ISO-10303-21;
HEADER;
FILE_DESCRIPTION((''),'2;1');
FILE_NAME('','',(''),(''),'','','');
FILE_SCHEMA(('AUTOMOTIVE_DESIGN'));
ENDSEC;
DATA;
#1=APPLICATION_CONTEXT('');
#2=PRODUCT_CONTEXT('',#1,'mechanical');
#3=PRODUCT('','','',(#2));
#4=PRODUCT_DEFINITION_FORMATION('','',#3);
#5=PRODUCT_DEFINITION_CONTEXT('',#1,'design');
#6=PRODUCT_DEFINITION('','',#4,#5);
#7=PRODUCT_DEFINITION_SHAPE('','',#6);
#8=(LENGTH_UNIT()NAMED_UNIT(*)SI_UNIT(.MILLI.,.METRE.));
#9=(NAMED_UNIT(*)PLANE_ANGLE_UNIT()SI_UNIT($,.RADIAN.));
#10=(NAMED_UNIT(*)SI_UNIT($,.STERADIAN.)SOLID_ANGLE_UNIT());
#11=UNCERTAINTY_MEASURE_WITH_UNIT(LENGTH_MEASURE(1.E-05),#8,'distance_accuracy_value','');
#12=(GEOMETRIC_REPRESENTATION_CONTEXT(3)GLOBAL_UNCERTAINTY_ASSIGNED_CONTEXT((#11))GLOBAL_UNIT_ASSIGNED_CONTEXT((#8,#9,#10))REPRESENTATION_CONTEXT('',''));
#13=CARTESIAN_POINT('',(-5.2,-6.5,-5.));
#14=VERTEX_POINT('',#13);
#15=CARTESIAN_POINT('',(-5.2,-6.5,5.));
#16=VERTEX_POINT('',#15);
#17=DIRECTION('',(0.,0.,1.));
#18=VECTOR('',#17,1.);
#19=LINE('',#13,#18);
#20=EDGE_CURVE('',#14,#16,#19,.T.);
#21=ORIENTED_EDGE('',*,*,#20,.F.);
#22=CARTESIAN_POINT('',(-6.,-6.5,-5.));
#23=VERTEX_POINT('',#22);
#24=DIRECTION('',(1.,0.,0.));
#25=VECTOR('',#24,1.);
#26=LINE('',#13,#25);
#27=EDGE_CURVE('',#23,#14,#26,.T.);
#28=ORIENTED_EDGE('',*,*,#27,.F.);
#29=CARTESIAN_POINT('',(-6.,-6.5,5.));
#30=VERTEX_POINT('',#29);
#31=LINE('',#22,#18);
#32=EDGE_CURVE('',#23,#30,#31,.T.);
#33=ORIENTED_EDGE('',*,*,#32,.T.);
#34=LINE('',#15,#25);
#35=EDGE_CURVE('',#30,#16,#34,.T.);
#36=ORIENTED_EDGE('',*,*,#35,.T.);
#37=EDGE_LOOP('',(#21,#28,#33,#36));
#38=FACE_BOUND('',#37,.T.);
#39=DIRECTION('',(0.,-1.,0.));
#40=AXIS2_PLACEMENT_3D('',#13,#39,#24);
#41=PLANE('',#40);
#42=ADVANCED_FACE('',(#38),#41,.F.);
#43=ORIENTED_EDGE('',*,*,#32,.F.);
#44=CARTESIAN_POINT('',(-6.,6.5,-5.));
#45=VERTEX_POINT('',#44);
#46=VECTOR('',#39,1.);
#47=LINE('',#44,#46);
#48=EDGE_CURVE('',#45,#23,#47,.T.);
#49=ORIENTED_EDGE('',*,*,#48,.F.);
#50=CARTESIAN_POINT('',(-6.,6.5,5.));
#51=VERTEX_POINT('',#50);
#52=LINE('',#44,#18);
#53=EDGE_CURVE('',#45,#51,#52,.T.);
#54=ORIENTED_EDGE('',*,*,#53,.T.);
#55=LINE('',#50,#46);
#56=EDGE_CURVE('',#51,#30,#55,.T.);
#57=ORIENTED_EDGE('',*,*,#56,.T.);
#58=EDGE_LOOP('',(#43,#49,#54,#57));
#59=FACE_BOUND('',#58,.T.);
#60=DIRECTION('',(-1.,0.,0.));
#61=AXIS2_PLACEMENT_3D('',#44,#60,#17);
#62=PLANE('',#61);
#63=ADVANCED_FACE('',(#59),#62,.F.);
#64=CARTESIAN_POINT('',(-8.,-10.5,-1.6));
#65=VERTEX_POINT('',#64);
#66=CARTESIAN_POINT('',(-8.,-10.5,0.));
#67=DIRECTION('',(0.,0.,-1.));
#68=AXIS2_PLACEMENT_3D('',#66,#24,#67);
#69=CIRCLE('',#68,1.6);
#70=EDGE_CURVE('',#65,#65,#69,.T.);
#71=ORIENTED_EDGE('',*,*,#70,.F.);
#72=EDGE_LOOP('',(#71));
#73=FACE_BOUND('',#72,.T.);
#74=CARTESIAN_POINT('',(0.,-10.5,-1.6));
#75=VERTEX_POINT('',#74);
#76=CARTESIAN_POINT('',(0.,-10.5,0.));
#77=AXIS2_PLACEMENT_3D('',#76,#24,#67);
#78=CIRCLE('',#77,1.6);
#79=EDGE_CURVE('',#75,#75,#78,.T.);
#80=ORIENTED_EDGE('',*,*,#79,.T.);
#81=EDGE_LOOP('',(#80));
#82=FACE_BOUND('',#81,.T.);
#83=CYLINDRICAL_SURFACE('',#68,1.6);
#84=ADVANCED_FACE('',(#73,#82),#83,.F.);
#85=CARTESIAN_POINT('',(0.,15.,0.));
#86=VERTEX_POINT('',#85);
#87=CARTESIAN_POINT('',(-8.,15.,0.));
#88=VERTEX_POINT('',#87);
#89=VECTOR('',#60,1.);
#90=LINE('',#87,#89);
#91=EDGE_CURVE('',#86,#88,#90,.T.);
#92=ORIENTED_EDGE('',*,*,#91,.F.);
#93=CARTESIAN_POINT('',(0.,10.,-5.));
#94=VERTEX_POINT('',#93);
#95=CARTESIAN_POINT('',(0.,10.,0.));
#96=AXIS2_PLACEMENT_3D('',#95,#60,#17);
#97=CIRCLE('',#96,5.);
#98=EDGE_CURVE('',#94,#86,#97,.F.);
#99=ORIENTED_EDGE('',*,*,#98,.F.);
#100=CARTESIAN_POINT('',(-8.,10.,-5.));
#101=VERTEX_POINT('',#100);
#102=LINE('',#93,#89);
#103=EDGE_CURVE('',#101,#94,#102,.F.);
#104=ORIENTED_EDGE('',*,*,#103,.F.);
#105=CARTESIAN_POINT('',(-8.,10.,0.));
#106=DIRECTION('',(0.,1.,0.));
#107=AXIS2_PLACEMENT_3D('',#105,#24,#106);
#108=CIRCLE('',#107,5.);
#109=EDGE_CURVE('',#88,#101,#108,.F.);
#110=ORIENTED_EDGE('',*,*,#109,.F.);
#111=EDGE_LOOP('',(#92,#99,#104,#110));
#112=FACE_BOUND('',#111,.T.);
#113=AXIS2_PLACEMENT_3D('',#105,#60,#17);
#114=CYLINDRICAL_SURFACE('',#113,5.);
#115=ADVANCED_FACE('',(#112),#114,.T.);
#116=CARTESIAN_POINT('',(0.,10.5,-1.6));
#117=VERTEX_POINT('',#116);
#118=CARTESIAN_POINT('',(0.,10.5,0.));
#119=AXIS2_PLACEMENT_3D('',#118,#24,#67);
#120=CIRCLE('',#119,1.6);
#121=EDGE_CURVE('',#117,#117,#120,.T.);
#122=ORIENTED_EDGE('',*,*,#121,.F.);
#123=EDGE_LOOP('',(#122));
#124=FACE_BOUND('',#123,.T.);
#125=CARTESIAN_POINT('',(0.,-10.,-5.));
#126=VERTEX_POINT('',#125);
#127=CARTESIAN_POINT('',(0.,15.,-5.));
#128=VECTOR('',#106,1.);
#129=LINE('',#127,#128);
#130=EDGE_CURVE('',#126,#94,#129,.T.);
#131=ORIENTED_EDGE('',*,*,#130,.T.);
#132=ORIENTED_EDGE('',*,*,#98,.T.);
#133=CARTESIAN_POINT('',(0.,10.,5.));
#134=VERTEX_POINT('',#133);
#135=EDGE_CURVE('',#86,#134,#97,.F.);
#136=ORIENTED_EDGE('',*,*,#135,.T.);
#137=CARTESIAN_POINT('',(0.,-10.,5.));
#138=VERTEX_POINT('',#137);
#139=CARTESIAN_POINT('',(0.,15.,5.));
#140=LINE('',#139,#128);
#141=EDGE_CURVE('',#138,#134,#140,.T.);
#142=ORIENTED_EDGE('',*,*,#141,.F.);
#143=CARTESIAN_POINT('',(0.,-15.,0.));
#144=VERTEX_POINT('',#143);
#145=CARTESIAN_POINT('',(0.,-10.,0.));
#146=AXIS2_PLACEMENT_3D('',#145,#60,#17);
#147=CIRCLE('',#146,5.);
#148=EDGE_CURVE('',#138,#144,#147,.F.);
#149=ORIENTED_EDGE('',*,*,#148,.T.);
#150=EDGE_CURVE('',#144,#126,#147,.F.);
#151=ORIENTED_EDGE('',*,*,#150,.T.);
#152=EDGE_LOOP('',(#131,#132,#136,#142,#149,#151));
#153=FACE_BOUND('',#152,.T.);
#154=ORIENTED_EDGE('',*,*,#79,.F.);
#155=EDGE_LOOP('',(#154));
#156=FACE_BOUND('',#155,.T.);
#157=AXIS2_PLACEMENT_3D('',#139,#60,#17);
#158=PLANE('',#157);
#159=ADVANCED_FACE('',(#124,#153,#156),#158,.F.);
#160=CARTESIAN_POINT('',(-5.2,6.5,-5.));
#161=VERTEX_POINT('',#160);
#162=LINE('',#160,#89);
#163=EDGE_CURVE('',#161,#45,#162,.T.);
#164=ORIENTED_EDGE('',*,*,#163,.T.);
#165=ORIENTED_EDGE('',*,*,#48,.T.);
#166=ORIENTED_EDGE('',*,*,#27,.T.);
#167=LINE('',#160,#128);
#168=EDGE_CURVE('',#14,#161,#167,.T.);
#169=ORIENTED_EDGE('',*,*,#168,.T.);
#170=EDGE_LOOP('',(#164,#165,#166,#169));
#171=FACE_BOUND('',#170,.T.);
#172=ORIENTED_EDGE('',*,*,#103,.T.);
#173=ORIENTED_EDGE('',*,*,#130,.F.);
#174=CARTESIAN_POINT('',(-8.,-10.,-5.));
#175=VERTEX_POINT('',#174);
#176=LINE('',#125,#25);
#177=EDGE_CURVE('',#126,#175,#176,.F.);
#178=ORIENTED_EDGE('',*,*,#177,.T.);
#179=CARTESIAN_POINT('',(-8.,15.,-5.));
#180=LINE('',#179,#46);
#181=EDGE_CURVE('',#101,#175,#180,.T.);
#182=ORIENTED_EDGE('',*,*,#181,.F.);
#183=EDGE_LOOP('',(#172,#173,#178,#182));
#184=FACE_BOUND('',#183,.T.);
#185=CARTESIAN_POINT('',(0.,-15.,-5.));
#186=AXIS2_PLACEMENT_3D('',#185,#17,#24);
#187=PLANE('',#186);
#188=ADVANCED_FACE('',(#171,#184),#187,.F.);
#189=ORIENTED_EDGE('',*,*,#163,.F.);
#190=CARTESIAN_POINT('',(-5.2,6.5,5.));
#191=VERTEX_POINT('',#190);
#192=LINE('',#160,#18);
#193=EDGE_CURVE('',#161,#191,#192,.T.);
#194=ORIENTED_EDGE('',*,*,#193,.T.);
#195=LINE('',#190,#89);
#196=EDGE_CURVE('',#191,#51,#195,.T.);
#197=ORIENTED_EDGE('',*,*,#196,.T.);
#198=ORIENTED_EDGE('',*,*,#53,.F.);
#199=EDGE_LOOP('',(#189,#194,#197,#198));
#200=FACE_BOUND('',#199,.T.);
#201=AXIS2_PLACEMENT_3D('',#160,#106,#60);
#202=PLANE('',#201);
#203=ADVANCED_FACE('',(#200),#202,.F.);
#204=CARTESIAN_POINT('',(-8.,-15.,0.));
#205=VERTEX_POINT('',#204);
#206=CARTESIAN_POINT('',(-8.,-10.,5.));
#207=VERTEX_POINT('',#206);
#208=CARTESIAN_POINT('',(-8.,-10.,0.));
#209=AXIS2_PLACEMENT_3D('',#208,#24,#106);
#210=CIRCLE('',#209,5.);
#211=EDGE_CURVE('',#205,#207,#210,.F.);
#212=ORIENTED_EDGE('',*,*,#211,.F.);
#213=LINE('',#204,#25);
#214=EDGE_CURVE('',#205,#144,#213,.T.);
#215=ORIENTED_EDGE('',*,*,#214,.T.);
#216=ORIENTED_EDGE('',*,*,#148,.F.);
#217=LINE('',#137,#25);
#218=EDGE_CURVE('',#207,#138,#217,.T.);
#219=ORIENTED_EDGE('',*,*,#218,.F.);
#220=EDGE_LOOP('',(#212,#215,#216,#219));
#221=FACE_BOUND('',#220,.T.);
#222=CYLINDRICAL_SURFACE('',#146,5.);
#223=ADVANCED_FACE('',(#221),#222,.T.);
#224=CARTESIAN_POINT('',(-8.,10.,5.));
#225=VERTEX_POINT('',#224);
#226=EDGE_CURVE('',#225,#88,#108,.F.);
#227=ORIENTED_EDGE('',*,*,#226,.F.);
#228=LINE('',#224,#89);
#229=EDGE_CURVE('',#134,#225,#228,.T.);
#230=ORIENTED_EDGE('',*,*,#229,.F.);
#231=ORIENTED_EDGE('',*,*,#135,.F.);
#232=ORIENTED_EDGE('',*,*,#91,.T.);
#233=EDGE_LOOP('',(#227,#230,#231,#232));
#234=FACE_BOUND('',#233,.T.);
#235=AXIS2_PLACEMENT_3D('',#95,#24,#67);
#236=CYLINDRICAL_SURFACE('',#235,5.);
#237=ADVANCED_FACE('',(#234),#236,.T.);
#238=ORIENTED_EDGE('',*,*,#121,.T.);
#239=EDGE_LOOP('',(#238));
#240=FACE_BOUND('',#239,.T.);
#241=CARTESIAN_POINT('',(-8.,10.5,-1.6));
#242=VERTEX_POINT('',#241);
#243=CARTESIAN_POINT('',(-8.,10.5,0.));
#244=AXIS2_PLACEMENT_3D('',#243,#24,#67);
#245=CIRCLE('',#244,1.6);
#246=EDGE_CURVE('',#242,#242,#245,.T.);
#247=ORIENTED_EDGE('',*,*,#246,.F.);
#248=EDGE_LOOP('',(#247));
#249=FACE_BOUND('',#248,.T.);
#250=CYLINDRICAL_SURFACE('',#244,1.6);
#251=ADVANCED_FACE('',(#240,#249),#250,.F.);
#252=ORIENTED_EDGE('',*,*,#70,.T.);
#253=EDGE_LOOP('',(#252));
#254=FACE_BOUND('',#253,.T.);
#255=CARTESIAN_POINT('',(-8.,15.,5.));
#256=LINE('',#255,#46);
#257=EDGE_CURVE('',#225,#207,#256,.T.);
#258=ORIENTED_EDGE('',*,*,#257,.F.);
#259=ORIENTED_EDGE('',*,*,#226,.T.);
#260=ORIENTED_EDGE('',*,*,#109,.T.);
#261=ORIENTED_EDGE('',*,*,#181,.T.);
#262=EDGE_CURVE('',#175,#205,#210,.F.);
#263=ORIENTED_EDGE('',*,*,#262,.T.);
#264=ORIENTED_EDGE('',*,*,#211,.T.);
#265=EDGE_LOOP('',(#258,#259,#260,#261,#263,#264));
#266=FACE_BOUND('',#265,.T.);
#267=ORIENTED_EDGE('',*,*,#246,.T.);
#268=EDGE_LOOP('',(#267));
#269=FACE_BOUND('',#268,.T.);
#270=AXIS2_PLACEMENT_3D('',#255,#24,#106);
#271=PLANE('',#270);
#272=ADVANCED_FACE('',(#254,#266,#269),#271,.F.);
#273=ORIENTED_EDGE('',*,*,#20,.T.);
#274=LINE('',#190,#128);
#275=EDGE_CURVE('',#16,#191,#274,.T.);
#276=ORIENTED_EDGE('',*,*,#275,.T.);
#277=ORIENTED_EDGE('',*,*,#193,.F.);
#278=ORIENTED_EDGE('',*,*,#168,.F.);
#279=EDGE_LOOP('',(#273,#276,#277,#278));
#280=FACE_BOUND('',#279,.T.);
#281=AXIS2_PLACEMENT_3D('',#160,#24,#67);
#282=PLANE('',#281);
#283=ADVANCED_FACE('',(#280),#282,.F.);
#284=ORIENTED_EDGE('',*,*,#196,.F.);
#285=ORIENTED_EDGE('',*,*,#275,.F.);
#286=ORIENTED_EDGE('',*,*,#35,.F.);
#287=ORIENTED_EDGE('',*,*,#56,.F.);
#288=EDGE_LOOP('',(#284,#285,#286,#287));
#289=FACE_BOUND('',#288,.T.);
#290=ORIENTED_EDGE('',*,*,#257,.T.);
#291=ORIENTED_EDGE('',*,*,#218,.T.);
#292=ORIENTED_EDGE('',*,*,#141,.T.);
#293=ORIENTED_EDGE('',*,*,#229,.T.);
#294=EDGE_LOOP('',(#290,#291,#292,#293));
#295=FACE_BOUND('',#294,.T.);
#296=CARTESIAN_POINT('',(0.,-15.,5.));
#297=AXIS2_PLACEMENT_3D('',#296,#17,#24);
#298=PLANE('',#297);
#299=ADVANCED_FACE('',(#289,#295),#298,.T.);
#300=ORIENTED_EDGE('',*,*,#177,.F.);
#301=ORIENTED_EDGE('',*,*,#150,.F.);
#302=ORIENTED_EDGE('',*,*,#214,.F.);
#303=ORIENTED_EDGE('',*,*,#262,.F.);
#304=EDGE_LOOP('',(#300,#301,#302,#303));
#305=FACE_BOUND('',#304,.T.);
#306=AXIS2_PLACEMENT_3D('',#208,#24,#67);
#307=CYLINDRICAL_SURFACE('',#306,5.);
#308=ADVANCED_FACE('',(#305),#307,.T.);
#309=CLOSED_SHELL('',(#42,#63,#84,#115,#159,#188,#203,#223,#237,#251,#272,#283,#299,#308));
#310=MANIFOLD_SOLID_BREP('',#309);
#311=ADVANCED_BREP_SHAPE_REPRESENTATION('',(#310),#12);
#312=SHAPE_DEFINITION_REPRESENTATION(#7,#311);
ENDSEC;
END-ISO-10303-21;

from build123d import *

# Parameters (mm, degrees)
SKIZZE1_W                            = 8
SKIZZE1_H                            = 30
AUFSATZ_LINEAR_AUSTRAGEN1_DEPTH      = 5
SKIZZE4_R                            = 1.6
SCHNITT_LINEAR_AUSTRAGEN4_DEPTH      = 18.720045147
VERRUNDUNG1_R                        = 5
SCHNITT_LINEAR_AUSTRAGEN5_DEPTH      = 18.720045147
SCHNITT_LINEAR_AUSTRAGEN5_DEPTH_BACK = 18.720045147
SKIZZE5_W                            = 0.8
SKIZZE5_H                            = 13


with BuildPart() as part:
    # Skizze1 → Aufsatz-Linear austragen1 (new, symmetric)
    with BuildSketch(Plane.XY):
        with Locations((-4, 0)):
            Rectangle(SKIZZE1_W, SKIZZE1_H)
    extrude(amount=AUFSATZ_LINEAR_AUSTRAGEN1_DEPTH, both=True)

    # Skizze4 → Schnitt-Linear austragen4 (cut, through all)
    with BuildSketch(Plane(origin=(0, 0, 0), x_dir=(0, 0, -1), z_dir=(1, 0, 0))):
        with Locations((0, 10.5)):
            Circle(SKIZZE4_R)
        with Locations((0, -10.5)):
            Circle(SKIZZE4_R)
    extrude(amount=-SCHNITT_LINEAR_AUSTRAGEN4_DEPTH, mode=Mode.SUBTRACT)

    # Verrundung1
    verrundung1_edges = [part.edges().sort_by_distance(p)[0] for p in [
        (-4, 15, 5),
        (-4, 15, -5),
        (-4, -15, 5),
        (-4, -15, -5),
    ]]
    fillet(verrundung1_edges, radius=VERRUNDUNG1_R - 0.0001)  # a hair under: the kernel refuses the full size

    # Skizze5 → Schnitt-Linear austragen5 (cut, two sides: drawn at the far end of the back side and taken through both)
    with BuildSketch(Plane.XY.offset(-SCHNITT_LINEAR_AUSTRAGEN5_DEPTH_BACK)):
        with Locations((-5.6, 0)):
            Rectangle(SKIZZE5_W, SKIZZE5_H)
    extrude(amount=SCHNITT_LINEAR_AUSTRAGEN5_DEPTH + SCHNITT_LINEAR_AUSTRAGEN5_DEPTH_BACK, mode=Mode.SUBTRACT)


solid = part.part
